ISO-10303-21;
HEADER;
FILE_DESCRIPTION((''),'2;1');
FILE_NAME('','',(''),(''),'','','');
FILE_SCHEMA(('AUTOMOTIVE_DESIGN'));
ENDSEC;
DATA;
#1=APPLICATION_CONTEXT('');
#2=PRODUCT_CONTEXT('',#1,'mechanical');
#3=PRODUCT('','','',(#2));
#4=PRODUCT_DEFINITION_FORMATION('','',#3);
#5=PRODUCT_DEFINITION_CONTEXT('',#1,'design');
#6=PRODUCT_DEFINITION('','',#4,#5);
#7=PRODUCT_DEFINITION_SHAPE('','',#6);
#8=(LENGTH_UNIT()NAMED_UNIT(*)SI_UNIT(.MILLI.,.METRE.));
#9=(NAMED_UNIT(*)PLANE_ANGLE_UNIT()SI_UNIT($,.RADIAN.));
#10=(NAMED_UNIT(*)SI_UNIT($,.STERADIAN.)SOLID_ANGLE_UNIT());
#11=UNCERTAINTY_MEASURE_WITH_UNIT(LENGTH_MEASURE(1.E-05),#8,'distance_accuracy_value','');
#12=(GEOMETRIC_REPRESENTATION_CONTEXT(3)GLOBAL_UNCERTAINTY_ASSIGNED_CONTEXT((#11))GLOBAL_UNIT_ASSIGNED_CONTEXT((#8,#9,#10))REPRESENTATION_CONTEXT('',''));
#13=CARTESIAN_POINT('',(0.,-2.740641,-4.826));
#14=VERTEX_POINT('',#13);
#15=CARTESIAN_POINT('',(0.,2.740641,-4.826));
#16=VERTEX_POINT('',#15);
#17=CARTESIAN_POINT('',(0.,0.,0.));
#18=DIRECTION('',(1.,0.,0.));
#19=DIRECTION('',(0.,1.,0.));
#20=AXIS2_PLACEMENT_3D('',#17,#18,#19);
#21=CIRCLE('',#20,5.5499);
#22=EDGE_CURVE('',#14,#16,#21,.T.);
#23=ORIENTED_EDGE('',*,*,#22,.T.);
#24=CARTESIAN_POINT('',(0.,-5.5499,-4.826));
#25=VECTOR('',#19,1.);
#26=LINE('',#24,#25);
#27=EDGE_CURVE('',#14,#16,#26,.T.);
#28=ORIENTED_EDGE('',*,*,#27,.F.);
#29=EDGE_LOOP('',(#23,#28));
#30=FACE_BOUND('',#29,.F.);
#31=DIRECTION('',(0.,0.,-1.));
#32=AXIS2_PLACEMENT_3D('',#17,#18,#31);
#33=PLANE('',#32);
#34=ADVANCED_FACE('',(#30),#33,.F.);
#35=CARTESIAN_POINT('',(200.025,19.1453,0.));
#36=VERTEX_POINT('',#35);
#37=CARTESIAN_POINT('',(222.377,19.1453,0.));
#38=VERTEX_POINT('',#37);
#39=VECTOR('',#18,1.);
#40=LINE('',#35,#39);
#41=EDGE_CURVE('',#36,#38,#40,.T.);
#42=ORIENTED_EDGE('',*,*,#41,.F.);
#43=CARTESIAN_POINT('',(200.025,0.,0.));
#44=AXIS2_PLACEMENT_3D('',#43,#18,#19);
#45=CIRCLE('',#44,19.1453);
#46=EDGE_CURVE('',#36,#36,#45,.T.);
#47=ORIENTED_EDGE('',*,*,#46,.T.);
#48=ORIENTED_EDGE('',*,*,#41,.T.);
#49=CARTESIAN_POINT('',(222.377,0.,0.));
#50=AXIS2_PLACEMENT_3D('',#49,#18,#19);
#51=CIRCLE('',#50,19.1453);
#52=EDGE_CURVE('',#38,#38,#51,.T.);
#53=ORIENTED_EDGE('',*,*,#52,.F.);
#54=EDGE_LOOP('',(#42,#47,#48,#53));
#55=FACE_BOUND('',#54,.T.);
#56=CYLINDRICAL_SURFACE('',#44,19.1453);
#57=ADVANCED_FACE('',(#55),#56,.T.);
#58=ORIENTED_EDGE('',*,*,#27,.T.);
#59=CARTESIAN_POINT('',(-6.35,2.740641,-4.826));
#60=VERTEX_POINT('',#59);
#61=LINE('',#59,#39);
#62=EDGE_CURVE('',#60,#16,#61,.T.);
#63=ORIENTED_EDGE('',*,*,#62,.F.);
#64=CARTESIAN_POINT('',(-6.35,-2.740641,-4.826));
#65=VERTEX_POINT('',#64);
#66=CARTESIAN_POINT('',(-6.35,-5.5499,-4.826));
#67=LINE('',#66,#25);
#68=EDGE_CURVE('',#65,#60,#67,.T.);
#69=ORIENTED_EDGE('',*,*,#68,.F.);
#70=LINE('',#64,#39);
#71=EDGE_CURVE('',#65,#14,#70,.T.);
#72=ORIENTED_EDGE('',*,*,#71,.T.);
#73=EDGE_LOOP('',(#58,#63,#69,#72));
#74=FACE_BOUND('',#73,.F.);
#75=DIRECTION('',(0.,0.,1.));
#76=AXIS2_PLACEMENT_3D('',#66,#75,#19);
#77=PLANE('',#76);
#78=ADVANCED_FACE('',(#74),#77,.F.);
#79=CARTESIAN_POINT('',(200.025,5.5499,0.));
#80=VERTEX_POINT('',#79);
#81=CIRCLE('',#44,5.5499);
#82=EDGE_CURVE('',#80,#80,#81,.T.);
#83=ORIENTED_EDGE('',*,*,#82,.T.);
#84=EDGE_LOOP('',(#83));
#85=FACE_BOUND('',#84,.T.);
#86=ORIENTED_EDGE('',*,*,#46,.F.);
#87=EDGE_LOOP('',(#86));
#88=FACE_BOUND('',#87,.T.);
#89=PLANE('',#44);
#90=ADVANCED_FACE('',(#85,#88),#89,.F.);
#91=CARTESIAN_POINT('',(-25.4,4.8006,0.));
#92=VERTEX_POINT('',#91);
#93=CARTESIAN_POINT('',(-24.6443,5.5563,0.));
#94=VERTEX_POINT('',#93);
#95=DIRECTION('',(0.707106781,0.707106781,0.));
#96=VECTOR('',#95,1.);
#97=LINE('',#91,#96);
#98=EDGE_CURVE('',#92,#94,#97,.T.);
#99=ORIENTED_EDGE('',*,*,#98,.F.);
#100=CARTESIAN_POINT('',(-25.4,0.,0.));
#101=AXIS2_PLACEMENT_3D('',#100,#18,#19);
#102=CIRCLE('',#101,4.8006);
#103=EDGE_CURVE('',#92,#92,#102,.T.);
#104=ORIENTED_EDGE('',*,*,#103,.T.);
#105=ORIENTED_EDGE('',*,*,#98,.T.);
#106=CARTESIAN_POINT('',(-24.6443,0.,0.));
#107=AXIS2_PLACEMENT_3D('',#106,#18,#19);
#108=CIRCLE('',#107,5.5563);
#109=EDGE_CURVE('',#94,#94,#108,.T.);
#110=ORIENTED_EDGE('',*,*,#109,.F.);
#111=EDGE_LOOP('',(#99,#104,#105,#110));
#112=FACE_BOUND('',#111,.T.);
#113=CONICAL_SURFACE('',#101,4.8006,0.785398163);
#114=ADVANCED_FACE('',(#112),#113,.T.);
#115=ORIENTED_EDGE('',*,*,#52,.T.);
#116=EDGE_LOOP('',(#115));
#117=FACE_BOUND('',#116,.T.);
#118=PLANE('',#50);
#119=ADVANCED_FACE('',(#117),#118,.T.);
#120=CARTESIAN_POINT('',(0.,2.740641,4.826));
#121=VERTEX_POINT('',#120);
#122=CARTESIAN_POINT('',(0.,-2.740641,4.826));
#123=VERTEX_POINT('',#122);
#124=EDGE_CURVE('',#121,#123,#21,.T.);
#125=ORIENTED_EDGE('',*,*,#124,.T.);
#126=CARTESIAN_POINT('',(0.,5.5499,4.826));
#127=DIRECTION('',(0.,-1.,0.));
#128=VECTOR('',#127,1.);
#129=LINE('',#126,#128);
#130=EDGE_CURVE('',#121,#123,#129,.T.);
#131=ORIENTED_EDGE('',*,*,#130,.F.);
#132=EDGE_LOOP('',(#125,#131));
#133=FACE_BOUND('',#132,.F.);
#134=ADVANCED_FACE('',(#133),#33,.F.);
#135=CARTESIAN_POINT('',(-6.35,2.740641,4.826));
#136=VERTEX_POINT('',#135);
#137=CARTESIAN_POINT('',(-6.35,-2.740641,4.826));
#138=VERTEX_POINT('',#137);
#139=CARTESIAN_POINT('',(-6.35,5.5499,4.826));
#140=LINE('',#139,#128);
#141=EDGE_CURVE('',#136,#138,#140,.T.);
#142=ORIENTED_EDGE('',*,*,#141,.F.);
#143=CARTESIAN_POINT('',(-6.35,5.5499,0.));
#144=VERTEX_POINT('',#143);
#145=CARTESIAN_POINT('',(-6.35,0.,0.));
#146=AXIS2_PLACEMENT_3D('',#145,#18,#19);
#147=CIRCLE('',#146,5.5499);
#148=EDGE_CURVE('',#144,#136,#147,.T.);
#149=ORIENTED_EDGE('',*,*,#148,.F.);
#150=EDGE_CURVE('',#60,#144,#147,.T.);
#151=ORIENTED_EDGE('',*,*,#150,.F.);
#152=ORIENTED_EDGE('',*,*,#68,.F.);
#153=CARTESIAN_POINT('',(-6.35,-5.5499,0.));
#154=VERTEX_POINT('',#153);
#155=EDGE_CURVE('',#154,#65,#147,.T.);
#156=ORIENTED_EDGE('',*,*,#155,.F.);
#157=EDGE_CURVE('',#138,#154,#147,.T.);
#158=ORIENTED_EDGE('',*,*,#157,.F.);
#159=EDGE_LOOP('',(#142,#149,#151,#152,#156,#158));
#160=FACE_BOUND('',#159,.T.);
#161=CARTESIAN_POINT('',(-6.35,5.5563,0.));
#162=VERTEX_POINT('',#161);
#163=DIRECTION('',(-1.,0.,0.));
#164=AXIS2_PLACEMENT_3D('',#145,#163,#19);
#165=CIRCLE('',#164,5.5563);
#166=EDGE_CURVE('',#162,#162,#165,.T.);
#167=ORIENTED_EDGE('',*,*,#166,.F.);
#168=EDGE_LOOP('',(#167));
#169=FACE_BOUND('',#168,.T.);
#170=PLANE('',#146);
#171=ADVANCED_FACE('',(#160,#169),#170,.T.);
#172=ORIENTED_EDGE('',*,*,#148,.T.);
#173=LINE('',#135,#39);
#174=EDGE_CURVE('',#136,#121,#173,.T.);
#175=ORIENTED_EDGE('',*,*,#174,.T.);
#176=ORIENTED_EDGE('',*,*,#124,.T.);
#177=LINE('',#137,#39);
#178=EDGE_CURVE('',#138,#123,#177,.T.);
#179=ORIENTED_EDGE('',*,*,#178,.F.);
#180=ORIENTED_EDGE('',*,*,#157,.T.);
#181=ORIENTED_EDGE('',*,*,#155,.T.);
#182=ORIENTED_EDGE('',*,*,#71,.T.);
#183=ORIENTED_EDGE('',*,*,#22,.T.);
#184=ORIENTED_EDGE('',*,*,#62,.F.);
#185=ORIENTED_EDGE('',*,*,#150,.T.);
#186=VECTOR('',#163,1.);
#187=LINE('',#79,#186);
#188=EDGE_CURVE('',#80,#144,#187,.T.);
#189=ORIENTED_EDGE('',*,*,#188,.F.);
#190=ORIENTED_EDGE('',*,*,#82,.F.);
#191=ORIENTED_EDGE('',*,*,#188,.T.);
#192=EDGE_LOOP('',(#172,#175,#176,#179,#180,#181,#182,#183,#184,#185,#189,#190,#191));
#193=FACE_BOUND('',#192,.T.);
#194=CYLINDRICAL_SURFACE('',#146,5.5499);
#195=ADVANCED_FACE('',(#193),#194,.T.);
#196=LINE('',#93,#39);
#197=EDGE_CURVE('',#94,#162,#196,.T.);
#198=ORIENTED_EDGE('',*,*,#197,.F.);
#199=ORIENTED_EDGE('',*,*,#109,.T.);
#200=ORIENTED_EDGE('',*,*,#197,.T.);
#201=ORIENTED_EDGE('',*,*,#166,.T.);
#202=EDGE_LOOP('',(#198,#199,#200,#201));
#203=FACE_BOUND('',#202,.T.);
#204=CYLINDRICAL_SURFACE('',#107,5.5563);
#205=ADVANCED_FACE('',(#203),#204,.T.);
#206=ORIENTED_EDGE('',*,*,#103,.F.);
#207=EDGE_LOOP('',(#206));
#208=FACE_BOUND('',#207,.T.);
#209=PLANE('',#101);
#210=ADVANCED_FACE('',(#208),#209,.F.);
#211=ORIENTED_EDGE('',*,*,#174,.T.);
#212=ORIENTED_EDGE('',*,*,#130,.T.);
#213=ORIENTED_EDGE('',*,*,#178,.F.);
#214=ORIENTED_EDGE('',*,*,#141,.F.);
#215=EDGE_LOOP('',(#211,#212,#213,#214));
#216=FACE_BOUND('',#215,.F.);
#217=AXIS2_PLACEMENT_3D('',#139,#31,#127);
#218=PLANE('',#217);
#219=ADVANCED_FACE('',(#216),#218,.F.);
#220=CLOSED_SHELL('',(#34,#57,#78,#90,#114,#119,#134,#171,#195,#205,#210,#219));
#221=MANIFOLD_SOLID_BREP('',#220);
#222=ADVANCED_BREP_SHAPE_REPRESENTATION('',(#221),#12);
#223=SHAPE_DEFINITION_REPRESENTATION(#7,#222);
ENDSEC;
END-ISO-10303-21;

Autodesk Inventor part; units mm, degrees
sketch "Sketch_1" plane through (0, 0, 0) normal (0, 0, 1) x (1, 0, 0)
  line L0 (222.377, 0) -> (-6.35, 0)
  line L1 (-6.35, 0) -> (-6.35, 5.5499)
  line L2 (-6.35, 5.5499) -> (200.025, 5.5499)
  line L3 (200.025, 5.5499) -> (200.025, 19.1453)
  line L4 (200.025, 19.1453) -> (222.377, 19.1453)
  line L5 (222.377, 19.1453) -> (222.377, 0)
  line L6 (222.377, 0) -> (-6.35, 0)
revolve "Revolution1" add sketch "Sketch_1" angle 360 about axis through (222.377, 0, 0) along (1, 0, 0)
sketch "Sketch_3" plane through (0, 0, 0) normal (0, 0, 1) x (1, 0, 0)
  line L0 (-6.35, 0) -> (-25.4, 0)
  line L1 (-25.4, 0) -> (-25.4, 4.8006)
  line L2 (-25.4, 4.8006) -> (-24.6443, 5.5563)
  line L3 (-24.6443, 5.5563) -> (-6.35, 5.5563)
  line L4 (-6.35, 5.5563) -> (-6.35, 0)
  line L5 (-6.35, 0) -> (-25.4, 0)
revolve "Revolution2" add sketch "Sketch_3" angle 360 about axis through (-6.35, 0, 0) along (1, 0, 0)
thread "Thread1" size "7/16-20 UNF" class "2A" standard "ANSI Unified Screw Threads" full length
sketch "Sketch_10" plane through (-6.35, 0, 0) normal (1, 0, 0) x (0, 0, -1)
  line L0 (-11.0998, 11.0998) -> (-11.0998, -11.0998)
  line L1 (-11.0998, -11.0998) -> (11.0998, -11.0998)
  line L2 (11.0998, -11.0998) -> (11.0998, 11.0998)
  line L3 (11.0998, 11.0998) -> (-11.0998, 11.0998)
  line L4 (-4.826, 5.5499) -> (-4.826, -5.5499)
  line L5 (-4.826, -5.5499) -> (4.826, -5.5499)
  line L6 (4.826, -5.5499) -> (4.826, 5.5499)
  line L7 (4.826, 5.5499) -> (-4.826, 5.5499)
extrude "Extrusion1" cut sketch "Sketch_10" along normal blind 6.35
ref_plane "dia1_XY" through (-6.35, 5.5499, 0) normal (1, 0, 0) x (0, 0, -1)
ref_plane "dia1_YZ" through (-6.35, 5.5499, 0) normal (0, 0, -1) x (0, 1, 0)
ref_plane "dia1_ZX" through (-6.35, 5.5499, 0) normal (0, 1, 0) x (1, 0, 0)
ref_plane "dia12_XY" through (0, 0, 19.7675) normal (1, 0, 0) x (0, 0, -1)
ref_plane "dia12_YZ" through (0, 0, 19.7675) normal (0, 0, -1) x (0, 1, 0)
ref_plane "dia12_ZX" through (0, 0, 19.7675) normal (0, 1, 0) x (1, 0, 0)
ref_plane "dia2_XY" through (-6.35, -5.5499, 0) normal (1, 0, 0) x (0, 0, -1)
ref_plane "dia2_YZ" through (-6.35, -5.5499, 0) normal (0, 0, -1) x (0, 1, 0)
ref_plane "dia2_ZX" through (-6.35, -5.5499, 0) normal (0, 1, 0) x (1, 0, 0)
ref_plane "dia22_XY" through (0, 0, -19.7675) normal (1, 0, 0) x (0, 0, -1)
ref_plane "dia22_YZ" through (0, 0, -19.7675) normal (0, 0, -1) x (0, 1, 0)
ref_plane "dia22_ZX" through (0, 0, -19.7675) normal (0, 1, 0) x (1, 0, 0)
ref_plane "rl1_XY" through (-25.4, 0, 0) normal (1, 0, 0) x (0, 0, -1)
ref_plane "rl1_YZ" through (-25.4, 0, 0) normal (0, 0, -1) x (0, 1, 0)
ref_plane "rl1_ZX" through (-25.4, 0, 0) normal (0, 1, 0) x (1, 0, 0)
ref_plane "rl2_XY" through (-6.35, 0, 0) normal (1, 0, 0) x (0, 0, -1)
ref_plane "rl2_YZ" through (-6.35, 0, 0) normal (0, 0, -1) x (0, 1, 0)
ref_plane "rl2_ZX" through (-6.35, 0, 0) normal (0, 1, 0) x (1, 0, 0)
ref_plane "rod_cp_XY" through (0, 0, 0) normal (1, 0, 0) x (0, 0, -1)
ref_plane "rod_cp_YZ" through (0, 0, 0) normal (0, 0, -1) x (0, 1, 0)
ref_plane "rod_cp_ZX" through (0, 0, 0) normal (0, 1, 0) x (1, 0, 0)
ref_plane "thd1_XY" through (-25.4, 5.5563, 0) normal (1, 0, 0) x (0, 0, -1)
ref_plane "thd1_YZ" through (-25.4, 5.5563, 0) normal (0, 0, -1) x (0, 1, 0)
ref_plane "thd1_ZX" through (-25.4, 5.5563, 0) normal (0, 1, 0) x (1, 0, 0)
ref_plane "thd2_XY" through (-25.4, -5.5563, 0) normal (1, 0, 0) x (0, 0, -1)
ref_plane "thd2_YZ" through (-25.4, -5.5563, 0) normal (0, 0, -1) x (0, 1, 0)
ref_plane "thd2_ZX" through (-25.4, -5.5563, 0) normal (0, 1, 0) x (1, 0, 0)
ref_plane "to_rod_clevis_XY" through (-30.988, 0, 0) normal (1, 0, 0) x (0, 0, -1)
ref_plane "to_rod_clevis_YZ" through (-30.988, 0, 0) normal (0, 0, -1) x (0, 1, 0)
ref_plane "to_rod_clevis_ZX" through (-30.988, 0, 0) normal (0, 1, 0) x (1, 0, 0)
ref_plane "wf1_XY" through (-6.35, 0, 0) normal (1, 0, 0) x (0, 0, -1)
ref_plane "wf1_YZ" through (-6.35, 0, 0) normal (0, 0, -1) x (0, 1, 0)
ref_plane "wf1_ZX" through (-6.35, 0, 0) normal (0, 1, 0) x (1, 0, 0)
ref_plane "wf2_XY" through (0, 0, 0) normal (1, 0, 0) x (0, 0, -1)
ref_plane "wf2_YZ" through (0, 0, 0) normal (0, 0, -1) x (0, 1, 0)
ref_plane "wf2_ZX" through (0, 0, 0) normal (0, 1, 0) x (1, 0, 0)
ref_plane "wfw1_XY" through (-6.35, 0, -4.826) normal (0, 1, 0) x (1, 0, 0)
ref_plane "wfw1_YZ" through (-6.35, 0, -4.826) normal (1, 0, 0) x (0, 0, -1)
ref_plane "wfw1_ZX" through (-6.35, 0, -4.826) normal (0, 0, -1) x (0, 1, 0)
ref_plane "wfw2_XY" through (-6.35, 0, 4.826) normal (0, 1, 0) x (1, 0, 0)
ref_plane "wfw2_YZ" through (-6.35, 0, 4.826) normal (1, 0, 0) x (0, 0, -1)
ref_plane "wfw2_ZX" through (-6.35, 0, 4.826) normal (0, 0, -1) x (0, 1, 0)
properties part number "C-176-DP0_rod" material "Steel"
